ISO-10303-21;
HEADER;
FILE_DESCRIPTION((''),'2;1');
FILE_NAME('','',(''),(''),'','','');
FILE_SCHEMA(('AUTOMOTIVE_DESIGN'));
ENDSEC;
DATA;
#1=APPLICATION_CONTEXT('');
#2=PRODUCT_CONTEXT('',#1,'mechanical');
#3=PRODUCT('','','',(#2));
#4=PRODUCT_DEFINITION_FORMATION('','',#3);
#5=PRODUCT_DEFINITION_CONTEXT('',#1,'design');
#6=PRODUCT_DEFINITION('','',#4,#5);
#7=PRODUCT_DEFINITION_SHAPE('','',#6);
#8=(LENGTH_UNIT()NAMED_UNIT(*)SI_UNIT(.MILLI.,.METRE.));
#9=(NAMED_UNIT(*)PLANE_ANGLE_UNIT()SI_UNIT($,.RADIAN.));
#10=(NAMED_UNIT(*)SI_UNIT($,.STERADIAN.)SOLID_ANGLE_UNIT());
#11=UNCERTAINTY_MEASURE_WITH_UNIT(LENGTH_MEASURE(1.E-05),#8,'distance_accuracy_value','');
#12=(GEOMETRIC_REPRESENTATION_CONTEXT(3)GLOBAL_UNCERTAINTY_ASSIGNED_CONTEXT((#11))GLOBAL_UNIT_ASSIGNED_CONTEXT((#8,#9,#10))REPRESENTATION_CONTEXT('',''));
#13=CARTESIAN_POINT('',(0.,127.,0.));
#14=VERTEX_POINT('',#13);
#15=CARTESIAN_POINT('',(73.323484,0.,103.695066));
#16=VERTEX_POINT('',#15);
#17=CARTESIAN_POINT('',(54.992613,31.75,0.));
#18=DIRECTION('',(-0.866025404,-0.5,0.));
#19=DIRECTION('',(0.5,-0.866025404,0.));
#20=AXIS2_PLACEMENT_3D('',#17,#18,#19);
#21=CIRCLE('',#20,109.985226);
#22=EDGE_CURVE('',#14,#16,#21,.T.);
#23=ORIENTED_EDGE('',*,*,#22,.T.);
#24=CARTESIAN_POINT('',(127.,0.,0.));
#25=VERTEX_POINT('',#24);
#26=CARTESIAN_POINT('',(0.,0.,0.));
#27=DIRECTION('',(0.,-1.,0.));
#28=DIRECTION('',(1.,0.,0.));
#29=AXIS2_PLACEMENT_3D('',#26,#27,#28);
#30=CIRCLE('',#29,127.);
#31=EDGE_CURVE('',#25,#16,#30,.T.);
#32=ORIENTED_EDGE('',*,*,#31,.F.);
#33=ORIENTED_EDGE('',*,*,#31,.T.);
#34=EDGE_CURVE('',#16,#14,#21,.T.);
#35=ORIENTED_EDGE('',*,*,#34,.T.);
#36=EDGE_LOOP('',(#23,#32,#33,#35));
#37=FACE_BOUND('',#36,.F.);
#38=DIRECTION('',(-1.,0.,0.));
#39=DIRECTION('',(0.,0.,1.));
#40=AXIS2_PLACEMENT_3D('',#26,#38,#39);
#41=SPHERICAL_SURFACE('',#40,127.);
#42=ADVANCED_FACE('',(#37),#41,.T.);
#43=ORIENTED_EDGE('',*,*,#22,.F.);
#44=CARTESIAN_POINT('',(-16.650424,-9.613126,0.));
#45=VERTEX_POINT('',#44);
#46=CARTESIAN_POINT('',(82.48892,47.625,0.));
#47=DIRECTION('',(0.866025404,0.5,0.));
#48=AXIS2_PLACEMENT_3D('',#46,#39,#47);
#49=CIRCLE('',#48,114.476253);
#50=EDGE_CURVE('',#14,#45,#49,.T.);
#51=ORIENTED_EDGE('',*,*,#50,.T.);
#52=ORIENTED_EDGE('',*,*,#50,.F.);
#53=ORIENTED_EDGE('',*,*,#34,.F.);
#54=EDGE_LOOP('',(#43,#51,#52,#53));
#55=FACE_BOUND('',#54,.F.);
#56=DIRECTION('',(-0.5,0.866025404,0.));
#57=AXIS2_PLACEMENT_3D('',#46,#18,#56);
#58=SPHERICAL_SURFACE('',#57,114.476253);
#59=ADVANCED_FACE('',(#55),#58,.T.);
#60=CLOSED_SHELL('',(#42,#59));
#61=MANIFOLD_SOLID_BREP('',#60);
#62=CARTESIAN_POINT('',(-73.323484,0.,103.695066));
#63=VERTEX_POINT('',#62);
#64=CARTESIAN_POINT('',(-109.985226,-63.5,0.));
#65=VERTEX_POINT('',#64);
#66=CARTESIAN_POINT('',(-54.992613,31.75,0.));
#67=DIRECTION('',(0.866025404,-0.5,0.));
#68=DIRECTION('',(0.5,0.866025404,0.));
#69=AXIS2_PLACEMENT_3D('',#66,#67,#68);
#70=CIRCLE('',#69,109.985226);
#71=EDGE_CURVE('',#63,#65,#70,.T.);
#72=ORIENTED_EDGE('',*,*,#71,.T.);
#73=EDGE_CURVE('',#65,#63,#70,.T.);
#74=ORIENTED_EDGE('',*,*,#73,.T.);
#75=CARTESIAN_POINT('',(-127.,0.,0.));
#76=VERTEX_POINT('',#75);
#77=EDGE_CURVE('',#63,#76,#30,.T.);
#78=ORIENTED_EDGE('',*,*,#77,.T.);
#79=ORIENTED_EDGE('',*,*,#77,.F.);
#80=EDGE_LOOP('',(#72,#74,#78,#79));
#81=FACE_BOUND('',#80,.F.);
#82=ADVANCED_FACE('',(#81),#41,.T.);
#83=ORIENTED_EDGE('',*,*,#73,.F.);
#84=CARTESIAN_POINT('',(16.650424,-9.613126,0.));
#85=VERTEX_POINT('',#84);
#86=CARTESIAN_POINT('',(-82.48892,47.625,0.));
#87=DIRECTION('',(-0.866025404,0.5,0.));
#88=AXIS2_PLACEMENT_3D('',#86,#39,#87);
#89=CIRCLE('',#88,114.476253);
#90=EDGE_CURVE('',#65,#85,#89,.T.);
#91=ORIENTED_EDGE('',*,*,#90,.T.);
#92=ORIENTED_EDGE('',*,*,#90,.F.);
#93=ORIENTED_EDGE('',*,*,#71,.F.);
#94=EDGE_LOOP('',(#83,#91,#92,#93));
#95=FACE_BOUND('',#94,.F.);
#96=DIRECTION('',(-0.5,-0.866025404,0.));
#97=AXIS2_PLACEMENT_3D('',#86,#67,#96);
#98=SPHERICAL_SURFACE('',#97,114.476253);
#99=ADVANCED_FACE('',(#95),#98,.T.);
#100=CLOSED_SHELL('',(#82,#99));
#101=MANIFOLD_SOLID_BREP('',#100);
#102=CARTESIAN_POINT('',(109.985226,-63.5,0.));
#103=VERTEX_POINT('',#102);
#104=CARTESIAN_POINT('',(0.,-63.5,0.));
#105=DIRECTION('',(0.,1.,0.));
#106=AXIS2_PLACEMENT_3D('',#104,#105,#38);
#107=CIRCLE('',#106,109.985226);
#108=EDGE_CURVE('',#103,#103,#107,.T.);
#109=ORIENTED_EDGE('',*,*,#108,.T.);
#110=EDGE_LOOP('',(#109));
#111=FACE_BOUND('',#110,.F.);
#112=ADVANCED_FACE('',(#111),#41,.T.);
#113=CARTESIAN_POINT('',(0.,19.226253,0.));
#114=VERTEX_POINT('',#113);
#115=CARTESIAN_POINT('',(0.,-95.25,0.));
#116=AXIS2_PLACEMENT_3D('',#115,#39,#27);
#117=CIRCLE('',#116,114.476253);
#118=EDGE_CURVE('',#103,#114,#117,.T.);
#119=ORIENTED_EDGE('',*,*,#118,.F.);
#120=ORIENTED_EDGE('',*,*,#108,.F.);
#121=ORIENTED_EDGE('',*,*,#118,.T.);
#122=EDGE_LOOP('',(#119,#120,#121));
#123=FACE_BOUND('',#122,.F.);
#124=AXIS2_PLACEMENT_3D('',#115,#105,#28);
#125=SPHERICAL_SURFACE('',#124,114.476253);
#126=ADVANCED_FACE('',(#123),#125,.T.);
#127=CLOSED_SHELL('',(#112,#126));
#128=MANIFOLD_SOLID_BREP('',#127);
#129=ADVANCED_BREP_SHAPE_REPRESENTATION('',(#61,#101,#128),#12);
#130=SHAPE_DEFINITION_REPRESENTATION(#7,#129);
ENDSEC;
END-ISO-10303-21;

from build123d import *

# Parameters (mm, degrees)
F6_COUNT = 3


# Not quite as in the source:
# - a feature of the source that left no trace in its solid (it failed there, or was rolled back) is left out


with BuildPart() as f5:
    # F4 (on Top) → F5 (revolve)
    with BuildSketch(Plane.XY):
        with BuildLine():
            Line((-16.6504235141, -9.613126498), (181.628262935, 104.863126498))
            ThreePointArc((181.628262935, 104.863126498), (25.2507932125, 146.7643432246), (-16.6504235141, -9.613126498))
        make_face()
    revolve(axis=Axis((82.4889197105, 47.625, 0), (0.8660254038, 0.5, 0)))


with BuildPart() as f6_1:
    # F6: instance of F5
    add(f5.part.rotate(Axis((0, 0, 36.1574739218), (0, 0, 1)), 1 * 360 / F6_COUNT))


with BuildPart() as f6_2:
    # F6: instance of F5
    add(f5.part.rotate(Axis((0, 0, 36.1574739218), (0, 0, 1)), 2 * 360 / F6_COUNT))


with BuildPart() as f10_tool:
    # F9 (on Front) → F10 (revolve)
    with BuildSketch(Plane.XZ):
        with BuildLine():
            Line((-127, 0), (127, 0))
            ThreePointArc((127, 0), (0, 127), (-127, 0))
        make_face()
    revolve(axis=Axis((0, 0, 0), (1, 0, 0)))


with BuildPart() as f5_1:
    add(f5.part)

    # F10: intersect by f10_tool
    add(f10_tool.part, mode=Mode.INTERSECT)


with BuildPart() as f6_1_1:
    add(f6_1.part)

    # F10: intersect by f10_tool
    add(f10_tool.part, mode=Mode.INTERSECT)


with BuildPart() as f6_2_1:
    add(f6_2.part)

    # F10: intersect by f10_tool
    add(f10_tool.part, mode=Mode.INTERSECT)


solid = Compound([f5_1.part, f6_1_1.part, f6_2_1.part])
